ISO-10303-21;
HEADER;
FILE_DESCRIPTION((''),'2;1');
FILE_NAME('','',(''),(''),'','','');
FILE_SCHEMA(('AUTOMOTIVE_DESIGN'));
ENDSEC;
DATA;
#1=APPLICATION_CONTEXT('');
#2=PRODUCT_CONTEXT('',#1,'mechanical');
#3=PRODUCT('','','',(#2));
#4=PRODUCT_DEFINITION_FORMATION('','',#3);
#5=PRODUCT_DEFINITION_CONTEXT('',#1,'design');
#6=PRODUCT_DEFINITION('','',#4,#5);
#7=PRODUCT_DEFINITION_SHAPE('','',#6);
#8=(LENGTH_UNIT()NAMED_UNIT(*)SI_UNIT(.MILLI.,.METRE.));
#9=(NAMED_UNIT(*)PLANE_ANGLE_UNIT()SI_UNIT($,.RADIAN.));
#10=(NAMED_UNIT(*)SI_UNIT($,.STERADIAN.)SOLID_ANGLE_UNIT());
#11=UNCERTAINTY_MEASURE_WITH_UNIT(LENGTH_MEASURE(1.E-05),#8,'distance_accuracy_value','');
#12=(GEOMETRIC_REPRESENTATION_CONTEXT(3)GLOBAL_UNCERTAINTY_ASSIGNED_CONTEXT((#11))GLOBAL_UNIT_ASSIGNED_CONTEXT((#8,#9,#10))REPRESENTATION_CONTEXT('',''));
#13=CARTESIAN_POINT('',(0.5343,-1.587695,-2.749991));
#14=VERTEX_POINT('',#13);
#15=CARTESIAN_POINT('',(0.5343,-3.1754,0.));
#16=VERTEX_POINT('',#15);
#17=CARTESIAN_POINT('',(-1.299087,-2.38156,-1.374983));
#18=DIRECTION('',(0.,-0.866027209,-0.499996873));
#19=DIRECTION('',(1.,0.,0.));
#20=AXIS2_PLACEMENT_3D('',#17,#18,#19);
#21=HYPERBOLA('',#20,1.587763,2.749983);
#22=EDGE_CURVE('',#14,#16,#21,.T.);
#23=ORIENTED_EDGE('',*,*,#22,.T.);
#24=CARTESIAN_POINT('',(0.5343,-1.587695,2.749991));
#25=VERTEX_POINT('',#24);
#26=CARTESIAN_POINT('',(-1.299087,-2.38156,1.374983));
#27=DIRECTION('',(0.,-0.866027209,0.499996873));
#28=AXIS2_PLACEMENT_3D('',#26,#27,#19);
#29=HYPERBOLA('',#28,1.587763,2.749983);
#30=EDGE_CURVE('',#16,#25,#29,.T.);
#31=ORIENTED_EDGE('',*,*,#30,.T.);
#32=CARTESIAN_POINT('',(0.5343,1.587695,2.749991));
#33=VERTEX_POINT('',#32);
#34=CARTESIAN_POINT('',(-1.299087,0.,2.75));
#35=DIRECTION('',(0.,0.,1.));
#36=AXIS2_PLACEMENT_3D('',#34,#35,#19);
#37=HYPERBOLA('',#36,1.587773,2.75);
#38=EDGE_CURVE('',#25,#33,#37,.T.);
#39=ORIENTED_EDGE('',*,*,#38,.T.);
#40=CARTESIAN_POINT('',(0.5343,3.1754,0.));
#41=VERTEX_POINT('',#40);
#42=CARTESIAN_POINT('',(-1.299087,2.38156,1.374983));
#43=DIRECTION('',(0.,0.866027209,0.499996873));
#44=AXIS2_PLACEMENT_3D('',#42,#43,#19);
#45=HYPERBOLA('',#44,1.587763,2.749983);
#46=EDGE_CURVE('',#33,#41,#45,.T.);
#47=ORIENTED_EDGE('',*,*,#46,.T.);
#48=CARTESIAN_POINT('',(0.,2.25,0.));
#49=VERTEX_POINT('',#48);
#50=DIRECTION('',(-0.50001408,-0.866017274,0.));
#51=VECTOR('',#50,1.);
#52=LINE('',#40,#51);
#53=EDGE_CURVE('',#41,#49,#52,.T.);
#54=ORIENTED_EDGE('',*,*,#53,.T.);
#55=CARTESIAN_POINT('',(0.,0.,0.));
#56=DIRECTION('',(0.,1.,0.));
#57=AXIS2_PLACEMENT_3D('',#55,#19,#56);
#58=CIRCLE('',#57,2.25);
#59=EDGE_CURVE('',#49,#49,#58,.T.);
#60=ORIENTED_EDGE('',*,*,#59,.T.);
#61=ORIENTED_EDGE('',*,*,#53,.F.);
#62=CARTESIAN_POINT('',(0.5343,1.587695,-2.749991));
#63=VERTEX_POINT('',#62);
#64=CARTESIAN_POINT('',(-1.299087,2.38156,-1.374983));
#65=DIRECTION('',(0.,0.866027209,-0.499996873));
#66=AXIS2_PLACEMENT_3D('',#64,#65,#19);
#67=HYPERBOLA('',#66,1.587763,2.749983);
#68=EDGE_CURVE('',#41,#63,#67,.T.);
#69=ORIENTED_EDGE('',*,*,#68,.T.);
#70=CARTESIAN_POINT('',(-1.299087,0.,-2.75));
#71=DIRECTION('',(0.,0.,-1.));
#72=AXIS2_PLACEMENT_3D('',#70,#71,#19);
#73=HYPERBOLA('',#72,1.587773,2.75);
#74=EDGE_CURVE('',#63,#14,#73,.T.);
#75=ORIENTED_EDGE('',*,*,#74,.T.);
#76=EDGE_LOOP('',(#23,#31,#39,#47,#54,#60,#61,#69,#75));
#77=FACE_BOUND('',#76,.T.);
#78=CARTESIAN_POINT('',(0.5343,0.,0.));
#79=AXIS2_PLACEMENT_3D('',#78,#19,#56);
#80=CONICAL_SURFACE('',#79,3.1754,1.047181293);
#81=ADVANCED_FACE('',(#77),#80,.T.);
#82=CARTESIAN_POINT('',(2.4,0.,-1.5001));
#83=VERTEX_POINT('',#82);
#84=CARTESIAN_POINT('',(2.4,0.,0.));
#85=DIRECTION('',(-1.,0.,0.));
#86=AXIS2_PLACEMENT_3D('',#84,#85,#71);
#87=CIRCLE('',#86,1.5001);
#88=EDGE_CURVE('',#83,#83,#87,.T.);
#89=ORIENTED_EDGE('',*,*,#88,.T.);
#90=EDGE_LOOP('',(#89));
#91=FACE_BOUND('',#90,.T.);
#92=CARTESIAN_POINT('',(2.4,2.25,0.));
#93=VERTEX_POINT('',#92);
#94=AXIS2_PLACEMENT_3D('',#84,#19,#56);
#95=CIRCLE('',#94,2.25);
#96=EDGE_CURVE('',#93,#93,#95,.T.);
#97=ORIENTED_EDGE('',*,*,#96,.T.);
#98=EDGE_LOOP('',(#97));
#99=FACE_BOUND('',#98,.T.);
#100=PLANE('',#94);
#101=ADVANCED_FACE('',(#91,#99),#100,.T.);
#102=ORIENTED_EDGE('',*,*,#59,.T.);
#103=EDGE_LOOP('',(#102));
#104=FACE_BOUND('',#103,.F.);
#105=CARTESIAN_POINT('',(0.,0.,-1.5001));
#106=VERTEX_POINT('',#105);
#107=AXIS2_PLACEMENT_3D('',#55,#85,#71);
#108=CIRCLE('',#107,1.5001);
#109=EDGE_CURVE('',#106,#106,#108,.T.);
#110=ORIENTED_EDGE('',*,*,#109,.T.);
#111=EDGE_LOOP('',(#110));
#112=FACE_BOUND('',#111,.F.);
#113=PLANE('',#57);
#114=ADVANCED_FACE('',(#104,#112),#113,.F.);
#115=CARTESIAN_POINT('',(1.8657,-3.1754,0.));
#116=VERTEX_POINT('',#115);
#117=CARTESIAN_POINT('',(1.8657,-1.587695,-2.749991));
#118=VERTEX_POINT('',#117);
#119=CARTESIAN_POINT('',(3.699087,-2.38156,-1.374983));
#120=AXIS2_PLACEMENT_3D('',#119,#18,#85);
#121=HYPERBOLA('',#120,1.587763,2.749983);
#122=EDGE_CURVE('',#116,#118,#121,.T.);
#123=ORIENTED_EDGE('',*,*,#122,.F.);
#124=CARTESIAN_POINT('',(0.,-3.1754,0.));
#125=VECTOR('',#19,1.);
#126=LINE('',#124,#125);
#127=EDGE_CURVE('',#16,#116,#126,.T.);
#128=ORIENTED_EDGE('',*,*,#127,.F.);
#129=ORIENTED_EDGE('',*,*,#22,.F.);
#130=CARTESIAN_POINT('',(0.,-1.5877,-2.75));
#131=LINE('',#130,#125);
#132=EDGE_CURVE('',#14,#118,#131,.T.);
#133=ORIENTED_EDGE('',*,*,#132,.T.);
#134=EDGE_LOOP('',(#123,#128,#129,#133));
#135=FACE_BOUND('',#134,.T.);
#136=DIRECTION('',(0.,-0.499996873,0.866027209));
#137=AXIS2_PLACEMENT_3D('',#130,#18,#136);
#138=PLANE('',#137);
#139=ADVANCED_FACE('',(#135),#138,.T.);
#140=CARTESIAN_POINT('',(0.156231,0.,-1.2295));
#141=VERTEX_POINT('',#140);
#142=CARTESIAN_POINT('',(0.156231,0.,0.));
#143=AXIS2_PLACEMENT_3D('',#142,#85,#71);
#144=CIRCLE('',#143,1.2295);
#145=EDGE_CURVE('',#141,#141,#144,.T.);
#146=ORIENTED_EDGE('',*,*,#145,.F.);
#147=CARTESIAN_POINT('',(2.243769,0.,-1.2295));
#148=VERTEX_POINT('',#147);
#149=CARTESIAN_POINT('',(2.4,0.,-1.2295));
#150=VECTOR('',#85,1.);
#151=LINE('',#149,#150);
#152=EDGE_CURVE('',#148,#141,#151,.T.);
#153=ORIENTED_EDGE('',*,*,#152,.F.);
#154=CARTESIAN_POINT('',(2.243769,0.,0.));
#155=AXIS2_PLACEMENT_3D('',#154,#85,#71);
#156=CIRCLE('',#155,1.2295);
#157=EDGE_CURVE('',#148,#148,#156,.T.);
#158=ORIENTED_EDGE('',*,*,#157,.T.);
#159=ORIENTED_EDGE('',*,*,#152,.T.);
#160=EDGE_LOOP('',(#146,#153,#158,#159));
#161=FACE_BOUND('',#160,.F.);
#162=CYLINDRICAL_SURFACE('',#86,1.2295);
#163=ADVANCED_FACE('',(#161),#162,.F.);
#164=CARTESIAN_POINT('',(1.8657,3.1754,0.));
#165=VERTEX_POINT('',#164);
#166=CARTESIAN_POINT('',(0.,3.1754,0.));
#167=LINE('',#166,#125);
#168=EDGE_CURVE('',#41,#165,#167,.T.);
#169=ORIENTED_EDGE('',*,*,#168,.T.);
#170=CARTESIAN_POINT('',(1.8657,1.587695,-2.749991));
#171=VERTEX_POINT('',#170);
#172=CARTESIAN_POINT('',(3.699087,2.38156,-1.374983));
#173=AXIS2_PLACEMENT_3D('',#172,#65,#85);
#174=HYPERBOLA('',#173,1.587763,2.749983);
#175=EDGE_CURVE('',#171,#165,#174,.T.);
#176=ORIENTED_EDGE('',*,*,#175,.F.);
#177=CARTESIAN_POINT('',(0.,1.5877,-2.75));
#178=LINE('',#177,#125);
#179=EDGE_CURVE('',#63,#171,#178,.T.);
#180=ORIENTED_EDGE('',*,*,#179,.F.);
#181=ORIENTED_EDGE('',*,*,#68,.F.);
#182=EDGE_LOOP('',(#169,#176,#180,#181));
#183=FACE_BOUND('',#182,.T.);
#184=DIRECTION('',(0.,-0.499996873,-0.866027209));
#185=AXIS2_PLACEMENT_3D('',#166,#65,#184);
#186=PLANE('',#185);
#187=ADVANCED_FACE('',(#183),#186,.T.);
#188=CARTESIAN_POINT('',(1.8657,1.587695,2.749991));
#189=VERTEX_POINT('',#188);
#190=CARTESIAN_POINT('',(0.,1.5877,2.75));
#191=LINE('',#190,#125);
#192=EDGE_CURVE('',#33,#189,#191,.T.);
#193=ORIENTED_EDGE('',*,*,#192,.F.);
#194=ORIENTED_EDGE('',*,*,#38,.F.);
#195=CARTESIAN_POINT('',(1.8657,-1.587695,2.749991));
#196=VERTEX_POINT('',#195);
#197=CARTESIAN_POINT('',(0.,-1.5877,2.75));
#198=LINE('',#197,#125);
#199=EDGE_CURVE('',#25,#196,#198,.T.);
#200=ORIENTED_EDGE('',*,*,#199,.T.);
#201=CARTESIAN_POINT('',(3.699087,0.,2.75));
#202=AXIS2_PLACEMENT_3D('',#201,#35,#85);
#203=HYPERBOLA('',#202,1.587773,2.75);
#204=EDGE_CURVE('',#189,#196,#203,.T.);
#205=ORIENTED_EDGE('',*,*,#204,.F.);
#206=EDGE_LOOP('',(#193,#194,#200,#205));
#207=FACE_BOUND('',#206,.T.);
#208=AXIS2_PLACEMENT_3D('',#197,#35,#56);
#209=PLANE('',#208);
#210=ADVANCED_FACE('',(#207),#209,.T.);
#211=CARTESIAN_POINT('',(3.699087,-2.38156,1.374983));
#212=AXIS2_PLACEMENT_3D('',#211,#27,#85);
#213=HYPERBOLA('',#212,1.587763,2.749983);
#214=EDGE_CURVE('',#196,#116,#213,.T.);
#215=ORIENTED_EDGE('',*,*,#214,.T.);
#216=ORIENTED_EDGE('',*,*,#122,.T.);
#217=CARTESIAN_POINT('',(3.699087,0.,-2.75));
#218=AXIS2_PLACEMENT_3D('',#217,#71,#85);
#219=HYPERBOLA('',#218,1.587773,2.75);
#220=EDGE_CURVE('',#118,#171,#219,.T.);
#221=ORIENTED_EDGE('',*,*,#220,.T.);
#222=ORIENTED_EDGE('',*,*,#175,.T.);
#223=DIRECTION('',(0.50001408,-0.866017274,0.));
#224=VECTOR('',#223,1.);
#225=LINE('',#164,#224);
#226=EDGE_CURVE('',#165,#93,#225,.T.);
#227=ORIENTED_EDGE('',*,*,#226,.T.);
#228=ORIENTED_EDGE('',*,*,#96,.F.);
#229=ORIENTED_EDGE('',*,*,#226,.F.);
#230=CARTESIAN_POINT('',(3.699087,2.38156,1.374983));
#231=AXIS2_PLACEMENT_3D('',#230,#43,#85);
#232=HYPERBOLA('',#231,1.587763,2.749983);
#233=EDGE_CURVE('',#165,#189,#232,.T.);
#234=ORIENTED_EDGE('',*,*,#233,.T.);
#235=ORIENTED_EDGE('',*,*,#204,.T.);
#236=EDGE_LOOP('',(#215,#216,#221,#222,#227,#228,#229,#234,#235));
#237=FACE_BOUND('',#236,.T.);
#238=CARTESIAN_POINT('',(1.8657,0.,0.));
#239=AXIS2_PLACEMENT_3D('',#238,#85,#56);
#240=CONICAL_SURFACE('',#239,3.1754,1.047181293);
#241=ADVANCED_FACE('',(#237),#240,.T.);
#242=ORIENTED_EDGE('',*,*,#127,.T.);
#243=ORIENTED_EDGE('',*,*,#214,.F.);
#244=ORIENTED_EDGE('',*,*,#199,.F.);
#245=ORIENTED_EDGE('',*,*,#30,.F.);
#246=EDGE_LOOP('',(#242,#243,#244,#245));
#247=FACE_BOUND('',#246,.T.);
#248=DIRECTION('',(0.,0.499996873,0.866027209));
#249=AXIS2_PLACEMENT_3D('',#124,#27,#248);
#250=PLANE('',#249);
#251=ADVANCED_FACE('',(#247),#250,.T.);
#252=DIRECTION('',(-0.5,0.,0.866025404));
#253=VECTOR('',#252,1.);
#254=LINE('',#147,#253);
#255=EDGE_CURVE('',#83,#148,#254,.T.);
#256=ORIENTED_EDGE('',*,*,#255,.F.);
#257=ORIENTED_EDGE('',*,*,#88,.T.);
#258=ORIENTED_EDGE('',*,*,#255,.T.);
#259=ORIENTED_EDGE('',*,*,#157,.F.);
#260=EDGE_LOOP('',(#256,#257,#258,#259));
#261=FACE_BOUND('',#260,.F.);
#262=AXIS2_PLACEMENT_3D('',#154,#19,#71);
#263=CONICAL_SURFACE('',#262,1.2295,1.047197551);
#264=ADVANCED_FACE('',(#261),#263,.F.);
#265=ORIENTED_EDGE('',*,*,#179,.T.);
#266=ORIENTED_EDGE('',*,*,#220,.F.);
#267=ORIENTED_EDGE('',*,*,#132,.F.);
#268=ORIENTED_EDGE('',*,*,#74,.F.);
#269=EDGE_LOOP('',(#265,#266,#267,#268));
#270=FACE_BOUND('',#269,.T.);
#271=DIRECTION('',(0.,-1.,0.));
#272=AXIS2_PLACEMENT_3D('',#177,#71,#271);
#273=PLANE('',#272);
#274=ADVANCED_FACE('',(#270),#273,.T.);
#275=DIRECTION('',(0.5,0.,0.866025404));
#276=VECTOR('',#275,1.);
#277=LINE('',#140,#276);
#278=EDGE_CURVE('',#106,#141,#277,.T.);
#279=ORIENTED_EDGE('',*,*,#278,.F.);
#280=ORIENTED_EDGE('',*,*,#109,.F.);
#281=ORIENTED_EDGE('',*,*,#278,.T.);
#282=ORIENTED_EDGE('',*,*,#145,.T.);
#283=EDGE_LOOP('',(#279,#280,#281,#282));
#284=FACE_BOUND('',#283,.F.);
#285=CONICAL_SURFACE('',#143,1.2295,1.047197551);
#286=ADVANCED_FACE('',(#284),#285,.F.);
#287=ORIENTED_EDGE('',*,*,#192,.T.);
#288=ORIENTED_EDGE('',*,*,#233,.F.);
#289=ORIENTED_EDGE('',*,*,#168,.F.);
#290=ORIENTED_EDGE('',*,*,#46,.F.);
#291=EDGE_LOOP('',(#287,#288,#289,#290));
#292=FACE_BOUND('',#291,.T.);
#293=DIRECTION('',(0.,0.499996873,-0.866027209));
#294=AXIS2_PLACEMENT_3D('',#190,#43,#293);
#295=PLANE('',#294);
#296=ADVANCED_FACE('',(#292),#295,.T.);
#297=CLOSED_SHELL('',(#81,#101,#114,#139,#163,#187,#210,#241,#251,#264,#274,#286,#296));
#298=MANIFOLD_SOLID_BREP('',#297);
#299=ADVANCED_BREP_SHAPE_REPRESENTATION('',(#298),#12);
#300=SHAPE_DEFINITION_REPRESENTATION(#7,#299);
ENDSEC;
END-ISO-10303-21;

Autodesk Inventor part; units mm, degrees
ref_plane "YZ Plane" through (0, 0, 0) normal (1, 0, 0) x (0, 1, 0)
ref_plane "XZ Plane" through (0, 0, 0) normal (0, 1, 0) x (-1, 0, 0)
sketch "Sketch1" plane through (0, 0, 0) normal (1, 0, 0) x (0, 1, 0)
  line L0 (-3.1754, 0) -> (-1.5877, 2.75)
  line L1 (-1.5877, 2.75) -> (1.5877, 2.75)
  line L2 (1.5877, 2.75) -> (3.1754, 0)
  line L3 (3.1754, 0) -> (1.5877, -2.75)
  line L4 (1.5877, -2.75) -> (-1.5877, -2.75)
  line L5 (-1.5877, -2.75) -> (-3.1754, 0)
  point P0 (0, 0)
  point P1 (0, 0)
  dimension "d0" = 6.3509
extrude "Body" add sketch "Sketch1" along normal blind 2.4
sketch "Sketch2" plane through (0, 0, 0) normal (0, 0, 1) x (1, 0, 0)
  line L0 (0, 1.5877) -> (0, 3.1754) projected
  line L1 (0, 3.1754) -> (2.4, 3.1754) projected
  line L2 (2.4, 1.5877) -> (2.4, 3.1754) projected
  line L3 (-0.48, 0) -> (2.88, 0) projected
  line L4 (0.5343, 3.1754) -> (0, 2.25)
  line L5 (1.8657, 3.1754) -> (2.4, 2.25)
  dimension "d3" = 30
  dimension "d4" = 30
  dimension "d5" = 4.5
  dimension "d6" = 4.5
revolve "Chamfer1" cut sketch "Sketch2" angle 360 about axis through (-10, 0, 0) along (1, 0, 0)
sketch "Sketch3" plane through (2.4, 0, 0) normal (1, 0, 0) x (0, 0, -1)
  arc A0 (-0.625, -1.0825) -> (0.625, -1.0825) centre (0, 0) ccw projected
hole "Thread" at (2.4, 0, 0) direction (-1, 0, 0) diameter 2.459 end through all thread size "M3x0.5" class "6H" standard "ISO Metric profile"
chamfer "Chamfer2" distance 0.2706 angle 30 1 edges at (2.4, 0, 1.2295) measured on face at (2.4, 1.8851, -0.2289)
chamfer "Chamfer3" distance 0.2706 angle 30 1 edges at (0, 0, 1.2295) measured on face at (0, 1.8851, -0.2289)
ref_plane "Work Plane1" through (-6.3375, 0, 0) normal (0, -0.8660254, -0.5) x (1, 0, 0)
equation "\"d0\" = 1.1547 * SW"
equation "\"d1\" = KOH"
equation "\"d8\" = -0.5 * GD1 + 0.5 * NND"
equation "\"d40\" = -0.5 * GD1 + 0.5 * NND"
equation "\"d10\" = -0.5 * GD1 + 0.5 * NND"
equation "\"d41\" = -0.5 * GD1 + 0.5 * NND"
equation "\"d3\" = ANG1"
equation "\"d4\" = ANG2"
equation "\"d5\" = SW0"
equation "\"d6\" = SW01"
equation "\"ANG1\" = 30deg"
equation "\"ANG2\" = 30deg"
equation "\"NND\" = 3"
equation "\"KOH\" = 2.4"
equation "\"SW\" = 5.5"
equation "\"SW0\" = SW01"
equation "\"SW01\" = 4.5"
equation "\"GUL\" = 0.541266 * PTC"
equation "\"THREADDIA\" = 3"
equation "\"TOA\" = 30deg"
equation "\"PTC\" = 0.5"
equation "\"E0\" = 1.155 * SW"
equation "\"GAL\" = 0.541266 * PTC"
equation "\"GD1\" = 2.458734"
properties part number "DIN 934 - M3" material "Steel, Mild"
